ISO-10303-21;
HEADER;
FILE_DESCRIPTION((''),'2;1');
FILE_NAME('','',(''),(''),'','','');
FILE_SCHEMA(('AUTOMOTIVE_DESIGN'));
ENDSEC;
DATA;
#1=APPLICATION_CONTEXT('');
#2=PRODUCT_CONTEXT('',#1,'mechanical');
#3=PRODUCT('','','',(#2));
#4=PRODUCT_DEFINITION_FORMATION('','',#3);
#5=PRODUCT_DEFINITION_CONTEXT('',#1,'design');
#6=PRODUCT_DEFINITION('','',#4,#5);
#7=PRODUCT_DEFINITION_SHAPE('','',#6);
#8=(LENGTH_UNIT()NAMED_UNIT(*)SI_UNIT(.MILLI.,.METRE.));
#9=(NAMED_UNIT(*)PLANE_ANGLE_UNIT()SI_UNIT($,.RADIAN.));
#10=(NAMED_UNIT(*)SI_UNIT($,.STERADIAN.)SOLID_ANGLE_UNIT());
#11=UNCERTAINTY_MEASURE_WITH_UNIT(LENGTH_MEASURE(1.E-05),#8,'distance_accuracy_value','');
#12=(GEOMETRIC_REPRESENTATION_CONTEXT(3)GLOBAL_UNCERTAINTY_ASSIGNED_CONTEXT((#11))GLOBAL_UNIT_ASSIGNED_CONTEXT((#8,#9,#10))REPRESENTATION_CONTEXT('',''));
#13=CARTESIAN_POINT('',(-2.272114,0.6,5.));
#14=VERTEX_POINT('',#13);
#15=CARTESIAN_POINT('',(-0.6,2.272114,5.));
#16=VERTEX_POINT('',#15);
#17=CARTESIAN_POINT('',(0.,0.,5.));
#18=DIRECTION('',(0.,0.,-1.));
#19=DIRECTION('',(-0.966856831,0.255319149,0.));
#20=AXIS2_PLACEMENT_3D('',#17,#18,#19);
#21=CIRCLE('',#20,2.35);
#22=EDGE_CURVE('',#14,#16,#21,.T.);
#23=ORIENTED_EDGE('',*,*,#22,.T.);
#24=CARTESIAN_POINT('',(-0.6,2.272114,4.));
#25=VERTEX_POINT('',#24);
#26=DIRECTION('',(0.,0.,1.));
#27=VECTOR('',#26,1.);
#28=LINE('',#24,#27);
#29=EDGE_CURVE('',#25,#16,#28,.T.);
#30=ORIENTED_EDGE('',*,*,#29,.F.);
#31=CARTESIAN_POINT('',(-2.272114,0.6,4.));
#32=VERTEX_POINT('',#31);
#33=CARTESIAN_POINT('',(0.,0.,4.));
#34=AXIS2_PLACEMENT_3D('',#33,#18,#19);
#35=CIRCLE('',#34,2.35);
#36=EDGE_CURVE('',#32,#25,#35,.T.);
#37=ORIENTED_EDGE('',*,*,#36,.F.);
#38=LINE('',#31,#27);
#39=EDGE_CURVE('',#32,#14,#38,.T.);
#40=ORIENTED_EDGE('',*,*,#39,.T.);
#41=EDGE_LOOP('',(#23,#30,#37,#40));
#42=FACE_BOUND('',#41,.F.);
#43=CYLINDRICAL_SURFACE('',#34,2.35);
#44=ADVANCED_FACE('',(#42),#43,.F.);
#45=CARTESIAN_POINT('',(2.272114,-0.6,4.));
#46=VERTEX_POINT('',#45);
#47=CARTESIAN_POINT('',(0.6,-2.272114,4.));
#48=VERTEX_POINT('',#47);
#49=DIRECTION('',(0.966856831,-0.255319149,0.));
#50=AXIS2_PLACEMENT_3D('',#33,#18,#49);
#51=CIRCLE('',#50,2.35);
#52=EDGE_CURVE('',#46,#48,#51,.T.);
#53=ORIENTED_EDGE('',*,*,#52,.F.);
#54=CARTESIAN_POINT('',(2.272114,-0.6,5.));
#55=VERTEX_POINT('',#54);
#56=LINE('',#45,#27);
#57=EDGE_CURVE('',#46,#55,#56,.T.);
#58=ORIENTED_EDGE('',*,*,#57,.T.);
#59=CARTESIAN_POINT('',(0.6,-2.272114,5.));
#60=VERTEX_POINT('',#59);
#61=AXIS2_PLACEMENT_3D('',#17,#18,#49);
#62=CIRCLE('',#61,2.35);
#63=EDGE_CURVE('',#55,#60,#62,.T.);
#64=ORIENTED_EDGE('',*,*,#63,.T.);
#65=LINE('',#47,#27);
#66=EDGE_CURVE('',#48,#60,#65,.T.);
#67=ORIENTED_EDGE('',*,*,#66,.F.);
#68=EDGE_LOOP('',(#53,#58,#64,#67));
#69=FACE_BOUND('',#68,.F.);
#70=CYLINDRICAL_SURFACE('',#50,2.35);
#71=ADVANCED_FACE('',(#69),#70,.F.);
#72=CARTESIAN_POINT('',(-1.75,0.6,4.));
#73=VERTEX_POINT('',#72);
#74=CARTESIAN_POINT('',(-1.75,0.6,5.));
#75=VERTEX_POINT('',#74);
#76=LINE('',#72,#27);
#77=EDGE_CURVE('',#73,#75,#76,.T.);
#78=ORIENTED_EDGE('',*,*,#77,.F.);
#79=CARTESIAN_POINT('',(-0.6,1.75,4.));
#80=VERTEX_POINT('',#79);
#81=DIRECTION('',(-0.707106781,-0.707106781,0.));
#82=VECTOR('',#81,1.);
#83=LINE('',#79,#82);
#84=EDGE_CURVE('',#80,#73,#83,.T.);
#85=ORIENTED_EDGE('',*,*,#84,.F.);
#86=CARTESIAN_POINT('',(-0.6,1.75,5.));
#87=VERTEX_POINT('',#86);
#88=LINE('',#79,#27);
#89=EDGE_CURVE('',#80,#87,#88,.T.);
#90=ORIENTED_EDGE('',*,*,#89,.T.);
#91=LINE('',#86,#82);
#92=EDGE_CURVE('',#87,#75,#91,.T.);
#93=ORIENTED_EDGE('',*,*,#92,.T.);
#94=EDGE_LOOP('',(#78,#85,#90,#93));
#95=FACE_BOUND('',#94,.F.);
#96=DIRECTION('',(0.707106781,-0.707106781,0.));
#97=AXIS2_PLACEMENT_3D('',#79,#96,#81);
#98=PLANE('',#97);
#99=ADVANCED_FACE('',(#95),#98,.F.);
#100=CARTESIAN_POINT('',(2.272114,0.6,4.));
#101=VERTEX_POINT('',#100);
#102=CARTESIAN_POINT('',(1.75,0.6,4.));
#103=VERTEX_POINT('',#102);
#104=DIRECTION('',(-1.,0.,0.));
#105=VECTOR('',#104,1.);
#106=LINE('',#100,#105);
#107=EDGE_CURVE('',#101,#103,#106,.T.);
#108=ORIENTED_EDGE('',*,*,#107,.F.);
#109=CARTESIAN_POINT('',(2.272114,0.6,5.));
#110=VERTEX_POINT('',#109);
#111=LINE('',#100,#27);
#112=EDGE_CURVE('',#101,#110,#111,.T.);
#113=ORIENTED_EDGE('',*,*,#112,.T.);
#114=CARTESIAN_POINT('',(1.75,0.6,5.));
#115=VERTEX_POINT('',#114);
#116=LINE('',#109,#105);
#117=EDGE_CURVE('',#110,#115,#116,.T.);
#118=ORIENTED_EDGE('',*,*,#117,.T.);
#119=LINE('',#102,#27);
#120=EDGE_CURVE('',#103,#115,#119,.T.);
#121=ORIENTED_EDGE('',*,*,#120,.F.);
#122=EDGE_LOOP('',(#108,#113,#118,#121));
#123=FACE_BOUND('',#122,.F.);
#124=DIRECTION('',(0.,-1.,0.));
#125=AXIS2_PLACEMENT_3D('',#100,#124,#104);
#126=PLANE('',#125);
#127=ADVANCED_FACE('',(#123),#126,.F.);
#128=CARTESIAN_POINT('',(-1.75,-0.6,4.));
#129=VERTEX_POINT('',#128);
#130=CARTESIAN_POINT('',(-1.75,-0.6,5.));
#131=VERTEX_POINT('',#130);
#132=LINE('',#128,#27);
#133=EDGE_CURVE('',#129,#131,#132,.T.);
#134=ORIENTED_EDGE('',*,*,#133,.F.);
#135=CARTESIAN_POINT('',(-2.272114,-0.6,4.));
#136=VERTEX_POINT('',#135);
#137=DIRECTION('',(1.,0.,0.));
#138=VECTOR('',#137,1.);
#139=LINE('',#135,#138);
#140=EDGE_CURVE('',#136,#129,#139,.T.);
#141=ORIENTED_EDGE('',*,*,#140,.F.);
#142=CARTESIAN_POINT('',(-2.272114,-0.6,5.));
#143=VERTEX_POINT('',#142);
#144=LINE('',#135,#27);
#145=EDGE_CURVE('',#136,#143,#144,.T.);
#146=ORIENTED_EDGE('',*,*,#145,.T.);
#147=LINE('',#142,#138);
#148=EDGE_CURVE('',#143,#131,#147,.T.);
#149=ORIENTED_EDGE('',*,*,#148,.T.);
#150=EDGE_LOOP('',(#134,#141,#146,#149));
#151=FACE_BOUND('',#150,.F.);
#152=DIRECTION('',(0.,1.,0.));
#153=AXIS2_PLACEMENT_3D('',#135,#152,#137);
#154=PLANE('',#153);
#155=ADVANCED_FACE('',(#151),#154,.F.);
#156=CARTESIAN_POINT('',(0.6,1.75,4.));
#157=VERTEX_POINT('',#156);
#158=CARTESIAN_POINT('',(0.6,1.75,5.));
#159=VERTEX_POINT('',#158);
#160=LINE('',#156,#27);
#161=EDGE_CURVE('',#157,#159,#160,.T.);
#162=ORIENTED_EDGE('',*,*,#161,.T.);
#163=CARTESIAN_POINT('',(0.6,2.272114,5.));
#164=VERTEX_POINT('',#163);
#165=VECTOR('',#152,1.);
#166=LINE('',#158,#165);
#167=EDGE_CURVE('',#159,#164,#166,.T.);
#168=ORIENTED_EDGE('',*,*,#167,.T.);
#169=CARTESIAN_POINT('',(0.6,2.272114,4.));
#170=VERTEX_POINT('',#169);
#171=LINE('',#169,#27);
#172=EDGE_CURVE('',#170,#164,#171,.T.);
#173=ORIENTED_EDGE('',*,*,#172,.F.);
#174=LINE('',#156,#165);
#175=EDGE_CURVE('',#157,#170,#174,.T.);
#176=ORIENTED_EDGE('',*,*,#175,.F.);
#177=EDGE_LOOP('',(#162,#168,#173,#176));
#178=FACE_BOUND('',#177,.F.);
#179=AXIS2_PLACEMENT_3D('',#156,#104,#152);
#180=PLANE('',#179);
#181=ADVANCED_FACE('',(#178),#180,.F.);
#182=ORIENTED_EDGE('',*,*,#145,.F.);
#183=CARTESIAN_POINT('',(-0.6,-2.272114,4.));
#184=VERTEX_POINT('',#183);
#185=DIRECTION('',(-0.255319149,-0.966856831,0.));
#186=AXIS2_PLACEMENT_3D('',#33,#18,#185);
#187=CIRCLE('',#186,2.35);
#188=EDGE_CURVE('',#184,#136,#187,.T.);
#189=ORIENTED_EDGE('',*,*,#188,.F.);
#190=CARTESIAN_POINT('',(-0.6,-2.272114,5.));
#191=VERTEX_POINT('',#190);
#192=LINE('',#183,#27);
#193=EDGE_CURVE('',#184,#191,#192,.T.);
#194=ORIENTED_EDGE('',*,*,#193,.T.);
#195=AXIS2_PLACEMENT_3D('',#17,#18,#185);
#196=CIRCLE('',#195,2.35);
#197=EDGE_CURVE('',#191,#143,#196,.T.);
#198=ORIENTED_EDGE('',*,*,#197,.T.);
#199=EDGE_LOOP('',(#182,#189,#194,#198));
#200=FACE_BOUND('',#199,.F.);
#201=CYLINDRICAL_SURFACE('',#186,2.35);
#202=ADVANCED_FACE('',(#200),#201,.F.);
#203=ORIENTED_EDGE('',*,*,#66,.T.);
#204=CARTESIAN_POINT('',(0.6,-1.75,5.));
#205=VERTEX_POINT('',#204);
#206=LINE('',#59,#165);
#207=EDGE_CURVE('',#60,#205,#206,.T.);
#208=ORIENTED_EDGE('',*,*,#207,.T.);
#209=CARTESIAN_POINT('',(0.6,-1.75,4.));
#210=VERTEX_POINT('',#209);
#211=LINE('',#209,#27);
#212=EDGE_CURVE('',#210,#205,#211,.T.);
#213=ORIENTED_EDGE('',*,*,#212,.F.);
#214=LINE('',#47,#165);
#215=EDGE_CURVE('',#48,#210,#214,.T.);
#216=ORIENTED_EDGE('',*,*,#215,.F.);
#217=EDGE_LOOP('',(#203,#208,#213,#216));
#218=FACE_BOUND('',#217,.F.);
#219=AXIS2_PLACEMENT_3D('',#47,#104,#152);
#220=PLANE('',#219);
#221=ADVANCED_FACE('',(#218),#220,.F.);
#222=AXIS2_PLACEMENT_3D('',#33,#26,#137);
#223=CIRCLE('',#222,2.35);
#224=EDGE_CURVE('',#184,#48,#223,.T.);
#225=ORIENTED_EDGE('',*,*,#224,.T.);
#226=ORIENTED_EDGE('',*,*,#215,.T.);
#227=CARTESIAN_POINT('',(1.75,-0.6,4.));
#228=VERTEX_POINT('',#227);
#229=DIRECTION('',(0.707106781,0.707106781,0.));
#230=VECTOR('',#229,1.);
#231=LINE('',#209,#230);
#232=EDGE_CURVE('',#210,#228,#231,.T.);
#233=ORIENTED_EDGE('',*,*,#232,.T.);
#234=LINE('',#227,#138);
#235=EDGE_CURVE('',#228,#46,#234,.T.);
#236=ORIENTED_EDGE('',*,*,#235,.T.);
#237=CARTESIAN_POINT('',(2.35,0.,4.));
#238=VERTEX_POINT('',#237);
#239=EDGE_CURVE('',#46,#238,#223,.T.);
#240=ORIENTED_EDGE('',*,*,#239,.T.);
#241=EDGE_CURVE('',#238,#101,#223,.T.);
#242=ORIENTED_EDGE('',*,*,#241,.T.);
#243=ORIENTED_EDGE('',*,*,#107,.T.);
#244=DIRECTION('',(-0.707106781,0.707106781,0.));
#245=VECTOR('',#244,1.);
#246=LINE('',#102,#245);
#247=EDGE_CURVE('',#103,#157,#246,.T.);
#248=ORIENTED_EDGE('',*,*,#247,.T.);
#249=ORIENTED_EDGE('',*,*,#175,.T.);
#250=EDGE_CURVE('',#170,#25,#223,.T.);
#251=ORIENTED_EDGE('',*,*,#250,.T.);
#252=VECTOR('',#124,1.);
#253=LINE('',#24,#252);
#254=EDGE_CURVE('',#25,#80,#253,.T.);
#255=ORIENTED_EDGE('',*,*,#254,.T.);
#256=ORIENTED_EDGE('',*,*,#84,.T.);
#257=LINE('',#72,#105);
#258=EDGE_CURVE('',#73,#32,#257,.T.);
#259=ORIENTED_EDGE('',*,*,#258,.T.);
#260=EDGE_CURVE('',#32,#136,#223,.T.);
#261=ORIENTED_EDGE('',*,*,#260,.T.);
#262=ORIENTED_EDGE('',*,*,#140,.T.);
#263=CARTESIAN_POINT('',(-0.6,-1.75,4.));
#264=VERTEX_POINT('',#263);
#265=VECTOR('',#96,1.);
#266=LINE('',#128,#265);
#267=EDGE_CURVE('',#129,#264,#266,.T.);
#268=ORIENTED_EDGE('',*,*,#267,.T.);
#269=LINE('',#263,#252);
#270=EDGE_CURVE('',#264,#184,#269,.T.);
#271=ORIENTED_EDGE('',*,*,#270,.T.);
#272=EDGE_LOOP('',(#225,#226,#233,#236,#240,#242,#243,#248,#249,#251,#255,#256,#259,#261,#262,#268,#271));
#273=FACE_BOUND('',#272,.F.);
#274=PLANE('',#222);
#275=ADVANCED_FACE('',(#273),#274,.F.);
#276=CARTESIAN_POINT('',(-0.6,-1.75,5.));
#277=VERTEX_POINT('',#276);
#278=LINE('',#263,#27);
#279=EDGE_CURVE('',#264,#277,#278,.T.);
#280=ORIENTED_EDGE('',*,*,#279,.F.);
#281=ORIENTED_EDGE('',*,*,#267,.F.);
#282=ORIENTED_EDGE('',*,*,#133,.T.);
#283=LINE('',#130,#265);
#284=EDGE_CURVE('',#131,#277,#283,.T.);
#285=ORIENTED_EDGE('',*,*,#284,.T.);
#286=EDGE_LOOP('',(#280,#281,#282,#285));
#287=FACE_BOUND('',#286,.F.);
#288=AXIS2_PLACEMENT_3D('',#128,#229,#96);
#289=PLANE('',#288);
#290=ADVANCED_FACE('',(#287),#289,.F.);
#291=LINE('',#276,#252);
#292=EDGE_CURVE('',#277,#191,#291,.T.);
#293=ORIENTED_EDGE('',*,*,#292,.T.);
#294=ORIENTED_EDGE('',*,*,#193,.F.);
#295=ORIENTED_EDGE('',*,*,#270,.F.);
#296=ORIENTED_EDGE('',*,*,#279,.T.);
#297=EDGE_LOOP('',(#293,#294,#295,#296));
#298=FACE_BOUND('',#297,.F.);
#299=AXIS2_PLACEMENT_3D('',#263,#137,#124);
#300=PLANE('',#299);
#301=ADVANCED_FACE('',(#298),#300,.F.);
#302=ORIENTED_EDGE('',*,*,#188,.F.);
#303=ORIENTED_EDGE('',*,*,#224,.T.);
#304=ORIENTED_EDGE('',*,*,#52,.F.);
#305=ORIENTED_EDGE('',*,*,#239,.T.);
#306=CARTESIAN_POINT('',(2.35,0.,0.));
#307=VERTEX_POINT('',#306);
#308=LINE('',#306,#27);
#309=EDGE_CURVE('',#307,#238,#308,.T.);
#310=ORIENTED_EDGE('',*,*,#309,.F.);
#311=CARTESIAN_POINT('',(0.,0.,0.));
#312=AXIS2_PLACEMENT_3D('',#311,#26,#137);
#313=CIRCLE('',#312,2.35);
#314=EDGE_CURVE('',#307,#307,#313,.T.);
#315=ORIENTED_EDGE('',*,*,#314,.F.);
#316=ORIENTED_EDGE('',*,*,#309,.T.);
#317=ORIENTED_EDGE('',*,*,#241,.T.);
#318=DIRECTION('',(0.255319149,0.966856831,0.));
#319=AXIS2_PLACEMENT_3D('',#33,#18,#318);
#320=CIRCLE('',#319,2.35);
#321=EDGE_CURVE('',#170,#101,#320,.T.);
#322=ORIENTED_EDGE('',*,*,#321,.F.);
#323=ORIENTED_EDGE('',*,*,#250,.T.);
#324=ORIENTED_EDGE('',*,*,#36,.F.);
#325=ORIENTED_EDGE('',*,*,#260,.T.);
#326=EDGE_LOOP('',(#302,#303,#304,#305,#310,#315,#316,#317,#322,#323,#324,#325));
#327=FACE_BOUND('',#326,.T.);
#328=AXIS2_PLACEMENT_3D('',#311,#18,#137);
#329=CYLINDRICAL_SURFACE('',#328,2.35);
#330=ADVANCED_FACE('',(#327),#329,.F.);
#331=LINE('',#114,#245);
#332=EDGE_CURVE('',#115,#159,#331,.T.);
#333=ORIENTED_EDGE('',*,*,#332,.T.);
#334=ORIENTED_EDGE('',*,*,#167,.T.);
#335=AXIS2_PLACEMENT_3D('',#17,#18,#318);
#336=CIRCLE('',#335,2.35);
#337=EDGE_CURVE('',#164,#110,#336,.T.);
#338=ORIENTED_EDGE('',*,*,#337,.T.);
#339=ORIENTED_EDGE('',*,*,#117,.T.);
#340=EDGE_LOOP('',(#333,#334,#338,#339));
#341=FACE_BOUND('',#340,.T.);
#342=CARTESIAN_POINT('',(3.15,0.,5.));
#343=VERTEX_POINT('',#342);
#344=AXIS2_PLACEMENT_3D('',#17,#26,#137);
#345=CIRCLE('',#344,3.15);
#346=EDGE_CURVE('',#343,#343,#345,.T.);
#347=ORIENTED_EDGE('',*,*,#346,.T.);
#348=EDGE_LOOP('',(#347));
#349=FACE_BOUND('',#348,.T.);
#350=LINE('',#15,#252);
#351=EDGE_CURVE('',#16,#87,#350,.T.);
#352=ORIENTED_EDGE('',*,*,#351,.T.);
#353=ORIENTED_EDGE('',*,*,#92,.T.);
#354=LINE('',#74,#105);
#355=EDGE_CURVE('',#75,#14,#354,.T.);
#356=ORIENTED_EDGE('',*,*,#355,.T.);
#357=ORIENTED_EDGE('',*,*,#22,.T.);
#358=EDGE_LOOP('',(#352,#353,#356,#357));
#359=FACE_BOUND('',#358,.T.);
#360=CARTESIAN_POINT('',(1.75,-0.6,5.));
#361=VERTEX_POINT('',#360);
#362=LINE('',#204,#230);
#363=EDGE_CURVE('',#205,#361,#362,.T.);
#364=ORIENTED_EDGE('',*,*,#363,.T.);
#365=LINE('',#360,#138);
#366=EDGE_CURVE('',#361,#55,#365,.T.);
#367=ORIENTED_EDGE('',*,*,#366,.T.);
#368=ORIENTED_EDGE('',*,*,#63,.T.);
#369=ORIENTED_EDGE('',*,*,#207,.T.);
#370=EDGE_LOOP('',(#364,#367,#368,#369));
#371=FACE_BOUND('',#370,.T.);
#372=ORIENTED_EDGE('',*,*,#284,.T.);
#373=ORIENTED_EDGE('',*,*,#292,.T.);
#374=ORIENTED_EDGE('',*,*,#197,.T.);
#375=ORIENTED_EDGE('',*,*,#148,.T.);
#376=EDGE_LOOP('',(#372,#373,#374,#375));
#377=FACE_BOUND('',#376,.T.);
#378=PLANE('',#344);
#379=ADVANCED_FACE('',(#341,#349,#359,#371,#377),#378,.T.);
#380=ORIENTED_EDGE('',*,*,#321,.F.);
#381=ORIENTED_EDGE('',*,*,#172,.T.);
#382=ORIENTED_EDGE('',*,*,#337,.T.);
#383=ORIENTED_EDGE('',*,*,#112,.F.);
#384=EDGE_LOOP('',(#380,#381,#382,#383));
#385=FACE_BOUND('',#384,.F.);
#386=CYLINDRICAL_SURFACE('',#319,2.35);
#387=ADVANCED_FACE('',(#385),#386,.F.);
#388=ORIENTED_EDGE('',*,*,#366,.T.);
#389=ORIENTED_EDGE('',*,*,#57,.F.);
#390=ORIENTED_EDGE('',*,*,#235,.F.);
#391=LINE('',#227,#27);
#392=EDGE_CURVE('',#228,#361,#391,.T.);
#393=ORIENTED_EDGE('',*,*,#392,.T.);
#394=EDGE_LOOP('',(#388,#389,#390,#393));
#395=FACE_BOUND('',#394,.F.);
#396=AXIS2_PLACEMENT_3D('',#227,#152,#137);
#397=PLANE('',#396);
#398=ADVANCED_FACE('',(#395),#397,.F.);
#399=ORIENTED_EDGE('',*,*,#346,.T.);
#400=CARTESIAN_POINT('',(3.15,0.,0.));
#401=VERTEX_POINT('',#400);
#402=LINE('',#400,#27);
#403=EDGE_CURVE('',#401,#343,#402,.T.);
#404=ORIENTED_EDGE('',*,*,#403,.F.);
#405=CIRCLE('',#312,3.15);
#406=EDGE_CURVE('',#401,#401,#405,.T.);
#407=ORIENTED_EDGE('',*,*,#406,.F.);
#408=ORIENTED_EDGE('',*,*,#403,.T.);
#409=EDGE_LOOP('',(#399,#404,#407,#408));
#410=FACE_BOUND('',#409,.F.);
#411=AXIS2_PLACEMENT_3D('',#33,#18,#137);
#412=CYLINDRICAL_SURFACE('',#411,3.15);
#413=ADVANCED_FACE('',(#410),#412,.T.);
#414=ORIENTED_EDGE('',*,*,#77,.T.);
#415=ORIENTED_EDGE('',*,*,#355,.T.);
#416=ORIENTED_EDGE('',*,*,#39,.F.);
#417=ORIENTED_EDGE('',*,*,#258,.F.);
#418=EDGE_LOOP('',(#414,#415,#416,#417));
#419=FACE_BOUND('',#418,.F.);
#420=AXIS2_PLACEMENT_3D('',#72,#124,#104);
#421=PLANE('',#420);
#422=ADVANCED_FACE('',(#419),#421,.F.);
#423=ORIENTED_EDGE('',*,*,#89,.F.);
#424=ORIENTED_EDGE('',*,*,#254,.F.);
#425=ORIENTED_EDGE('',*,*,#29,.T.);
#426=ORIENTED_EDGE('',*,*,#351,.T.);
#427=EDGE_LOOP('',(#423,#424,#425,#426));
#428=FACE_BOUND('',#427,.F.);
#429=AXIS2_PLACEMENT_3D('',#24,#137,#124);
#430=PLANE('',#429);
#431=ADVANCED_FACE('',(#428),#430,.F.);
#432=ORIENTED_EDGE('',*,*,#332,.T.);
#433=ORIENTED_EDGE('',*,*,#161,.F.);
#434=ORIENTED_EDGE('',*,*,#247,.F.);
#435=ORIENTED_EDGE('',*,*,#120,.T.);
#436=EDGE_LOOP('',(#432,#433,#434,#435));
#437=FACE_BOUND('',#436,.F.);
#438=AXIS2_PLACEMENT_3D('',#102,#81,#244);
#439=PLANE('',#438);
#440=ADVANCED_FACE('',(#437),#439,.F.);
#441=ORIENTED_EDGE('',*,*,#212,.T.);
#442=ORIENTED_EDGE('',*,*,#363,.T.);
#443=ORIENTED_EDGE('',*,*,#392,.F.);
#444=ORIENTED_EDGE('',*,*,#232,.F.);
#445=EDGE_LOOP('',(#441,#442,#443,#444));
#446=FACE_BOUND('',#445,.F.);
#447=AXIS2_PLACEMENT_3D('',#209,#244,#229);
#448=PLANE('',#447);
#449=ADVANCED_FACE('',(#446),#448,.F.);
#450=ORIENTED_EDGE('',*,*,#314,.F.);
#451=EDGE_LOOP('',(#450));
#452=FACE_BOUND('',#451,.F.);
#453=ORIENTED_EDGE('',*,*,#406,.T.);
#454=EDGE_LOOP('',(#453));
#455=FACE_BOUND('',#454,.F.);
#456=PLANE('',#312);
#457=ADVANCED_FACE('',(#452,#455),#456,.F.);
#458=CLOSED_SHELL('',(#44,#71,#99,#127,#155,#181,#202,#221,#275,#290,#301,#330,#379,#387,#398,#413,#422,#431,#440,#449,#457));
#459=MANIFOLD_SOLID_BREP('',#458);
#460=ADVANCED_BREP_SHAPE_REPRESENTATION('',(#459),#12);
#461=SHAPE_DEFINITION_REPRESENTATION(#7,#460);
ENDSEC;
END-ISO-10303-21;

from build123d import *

# Parameters (mm, degrees)
F0_R     = 3.15
F0_R_2   = 2.35
F1_DEPTH = 4
F2_R     = 3.15
F3_DEPTH = 1


# Not quite as in the source:
# - after a boolean that leaves OpenCascade's solid faulty, fix() repairs it


with BuildPart() as f1:
    # F0 (on Top) → F1 (new body)
    with BuildSketch(Plane.XY):
        Circle(F0_R)
        Circle(F0_R_2, mode=Mode.SUBTRACT)
    extrude(amount=F1_DEPTH)

    # F2 (on face) → F3 (join)
    with BuildSketch(Plane.XY.offset(4)):
        Circle(F2_R)
        with BuildLine():
            ThreePointArc((-2.2721135535, 0.6), (-1.6617009358, 1.6617009358), (-0.6, 2.2721135535))
            ThreePointArc((-0.6, 2.2721135535), (0, 2.35), (0.6, 2.2721135535))
            ThreePointArc((0.6, 2.2721135535), (1.6617009358, 1.6617009358), (2.2721135535, 0.6))
            ThreePointArc((2.2721135535, 0.6), (2.3304470441, 0.302517065), (2.35, 0))
            ThreePointArc((2.35, 0), (2.3304470441, -0.302517065), (2.2721135535, -0.6))
            ThreePointArc((2.2721135535, -0.6), (1.6617009358, -1.6617009358), (0.6, -2.2721135535))
            ThreePointArc((0.6, -2.2721135535), (0, -2.35), (-0.6, -2.2721135535))
            ThreePointArc((-0.6, -2.2721135535), (-1.6617009358, -1.6617009358), (-2.2721135535, -0.6))
            ThreePointArc((-2.2721135535, -0.6), (-2.35, 0), (-2.2721135535, 0.6))
        make_face(mode=Mode.SUBTRACT)
        with BuildLine():
            ThreePointArc((0.6, 2.2721135535), (0, 2.35), (-0.6, 2.2721135535))
            Line((-0.6, 2.2721135535), (-0.6, 1.75))
            Line((-0.6, 1.75), (-1.75, 0.6))
            Line((-1.75, 0.6), (-2.2721135535, 0.6))
            ThreePointArc((-2.2721135535, 0.6), (-2.35, 0), (-2.2721135535, -0.6))
            Line((-2.2721135535, -0.6), (-1.75, -0.6))
            Line((-1.75, -0.6), (-0.6, -1.75))
            Line((-0.6, -1.75), (-0.6, -2.2721135535))
            ThreePointArc((-0.6, -2.2721135535), (0, -2.35), (0.6, -2.2721135535))
            Line((0.6, -2.2721135535), (0.6, -1.75))
            Line((0.6, -1.75), (1.75, -0.6))
            Line((1.75, -0.6), (2.2721135535, -0.6))
            ThreePointArc((2.2721135535, -0.6), (2.3304470441, -0.302517065), (2.35, 0))
            ThreePointArc((2.35, 0), (2.3304470441, 0.302517065), (2.2721135535, 0.6))
            Line((2.2721135535, 0.6), (1.75, 0.6))
            Line((1.75, 0.6), (0.6, 1.75))
            Line((0.6, 1.75), (0.6, 2.2721135535))
        make_face()
    extrude(amount=F3_DEPTH)

    add(f1.part.fix(), mode=Mode.REPLACE)


solid = f1.part
